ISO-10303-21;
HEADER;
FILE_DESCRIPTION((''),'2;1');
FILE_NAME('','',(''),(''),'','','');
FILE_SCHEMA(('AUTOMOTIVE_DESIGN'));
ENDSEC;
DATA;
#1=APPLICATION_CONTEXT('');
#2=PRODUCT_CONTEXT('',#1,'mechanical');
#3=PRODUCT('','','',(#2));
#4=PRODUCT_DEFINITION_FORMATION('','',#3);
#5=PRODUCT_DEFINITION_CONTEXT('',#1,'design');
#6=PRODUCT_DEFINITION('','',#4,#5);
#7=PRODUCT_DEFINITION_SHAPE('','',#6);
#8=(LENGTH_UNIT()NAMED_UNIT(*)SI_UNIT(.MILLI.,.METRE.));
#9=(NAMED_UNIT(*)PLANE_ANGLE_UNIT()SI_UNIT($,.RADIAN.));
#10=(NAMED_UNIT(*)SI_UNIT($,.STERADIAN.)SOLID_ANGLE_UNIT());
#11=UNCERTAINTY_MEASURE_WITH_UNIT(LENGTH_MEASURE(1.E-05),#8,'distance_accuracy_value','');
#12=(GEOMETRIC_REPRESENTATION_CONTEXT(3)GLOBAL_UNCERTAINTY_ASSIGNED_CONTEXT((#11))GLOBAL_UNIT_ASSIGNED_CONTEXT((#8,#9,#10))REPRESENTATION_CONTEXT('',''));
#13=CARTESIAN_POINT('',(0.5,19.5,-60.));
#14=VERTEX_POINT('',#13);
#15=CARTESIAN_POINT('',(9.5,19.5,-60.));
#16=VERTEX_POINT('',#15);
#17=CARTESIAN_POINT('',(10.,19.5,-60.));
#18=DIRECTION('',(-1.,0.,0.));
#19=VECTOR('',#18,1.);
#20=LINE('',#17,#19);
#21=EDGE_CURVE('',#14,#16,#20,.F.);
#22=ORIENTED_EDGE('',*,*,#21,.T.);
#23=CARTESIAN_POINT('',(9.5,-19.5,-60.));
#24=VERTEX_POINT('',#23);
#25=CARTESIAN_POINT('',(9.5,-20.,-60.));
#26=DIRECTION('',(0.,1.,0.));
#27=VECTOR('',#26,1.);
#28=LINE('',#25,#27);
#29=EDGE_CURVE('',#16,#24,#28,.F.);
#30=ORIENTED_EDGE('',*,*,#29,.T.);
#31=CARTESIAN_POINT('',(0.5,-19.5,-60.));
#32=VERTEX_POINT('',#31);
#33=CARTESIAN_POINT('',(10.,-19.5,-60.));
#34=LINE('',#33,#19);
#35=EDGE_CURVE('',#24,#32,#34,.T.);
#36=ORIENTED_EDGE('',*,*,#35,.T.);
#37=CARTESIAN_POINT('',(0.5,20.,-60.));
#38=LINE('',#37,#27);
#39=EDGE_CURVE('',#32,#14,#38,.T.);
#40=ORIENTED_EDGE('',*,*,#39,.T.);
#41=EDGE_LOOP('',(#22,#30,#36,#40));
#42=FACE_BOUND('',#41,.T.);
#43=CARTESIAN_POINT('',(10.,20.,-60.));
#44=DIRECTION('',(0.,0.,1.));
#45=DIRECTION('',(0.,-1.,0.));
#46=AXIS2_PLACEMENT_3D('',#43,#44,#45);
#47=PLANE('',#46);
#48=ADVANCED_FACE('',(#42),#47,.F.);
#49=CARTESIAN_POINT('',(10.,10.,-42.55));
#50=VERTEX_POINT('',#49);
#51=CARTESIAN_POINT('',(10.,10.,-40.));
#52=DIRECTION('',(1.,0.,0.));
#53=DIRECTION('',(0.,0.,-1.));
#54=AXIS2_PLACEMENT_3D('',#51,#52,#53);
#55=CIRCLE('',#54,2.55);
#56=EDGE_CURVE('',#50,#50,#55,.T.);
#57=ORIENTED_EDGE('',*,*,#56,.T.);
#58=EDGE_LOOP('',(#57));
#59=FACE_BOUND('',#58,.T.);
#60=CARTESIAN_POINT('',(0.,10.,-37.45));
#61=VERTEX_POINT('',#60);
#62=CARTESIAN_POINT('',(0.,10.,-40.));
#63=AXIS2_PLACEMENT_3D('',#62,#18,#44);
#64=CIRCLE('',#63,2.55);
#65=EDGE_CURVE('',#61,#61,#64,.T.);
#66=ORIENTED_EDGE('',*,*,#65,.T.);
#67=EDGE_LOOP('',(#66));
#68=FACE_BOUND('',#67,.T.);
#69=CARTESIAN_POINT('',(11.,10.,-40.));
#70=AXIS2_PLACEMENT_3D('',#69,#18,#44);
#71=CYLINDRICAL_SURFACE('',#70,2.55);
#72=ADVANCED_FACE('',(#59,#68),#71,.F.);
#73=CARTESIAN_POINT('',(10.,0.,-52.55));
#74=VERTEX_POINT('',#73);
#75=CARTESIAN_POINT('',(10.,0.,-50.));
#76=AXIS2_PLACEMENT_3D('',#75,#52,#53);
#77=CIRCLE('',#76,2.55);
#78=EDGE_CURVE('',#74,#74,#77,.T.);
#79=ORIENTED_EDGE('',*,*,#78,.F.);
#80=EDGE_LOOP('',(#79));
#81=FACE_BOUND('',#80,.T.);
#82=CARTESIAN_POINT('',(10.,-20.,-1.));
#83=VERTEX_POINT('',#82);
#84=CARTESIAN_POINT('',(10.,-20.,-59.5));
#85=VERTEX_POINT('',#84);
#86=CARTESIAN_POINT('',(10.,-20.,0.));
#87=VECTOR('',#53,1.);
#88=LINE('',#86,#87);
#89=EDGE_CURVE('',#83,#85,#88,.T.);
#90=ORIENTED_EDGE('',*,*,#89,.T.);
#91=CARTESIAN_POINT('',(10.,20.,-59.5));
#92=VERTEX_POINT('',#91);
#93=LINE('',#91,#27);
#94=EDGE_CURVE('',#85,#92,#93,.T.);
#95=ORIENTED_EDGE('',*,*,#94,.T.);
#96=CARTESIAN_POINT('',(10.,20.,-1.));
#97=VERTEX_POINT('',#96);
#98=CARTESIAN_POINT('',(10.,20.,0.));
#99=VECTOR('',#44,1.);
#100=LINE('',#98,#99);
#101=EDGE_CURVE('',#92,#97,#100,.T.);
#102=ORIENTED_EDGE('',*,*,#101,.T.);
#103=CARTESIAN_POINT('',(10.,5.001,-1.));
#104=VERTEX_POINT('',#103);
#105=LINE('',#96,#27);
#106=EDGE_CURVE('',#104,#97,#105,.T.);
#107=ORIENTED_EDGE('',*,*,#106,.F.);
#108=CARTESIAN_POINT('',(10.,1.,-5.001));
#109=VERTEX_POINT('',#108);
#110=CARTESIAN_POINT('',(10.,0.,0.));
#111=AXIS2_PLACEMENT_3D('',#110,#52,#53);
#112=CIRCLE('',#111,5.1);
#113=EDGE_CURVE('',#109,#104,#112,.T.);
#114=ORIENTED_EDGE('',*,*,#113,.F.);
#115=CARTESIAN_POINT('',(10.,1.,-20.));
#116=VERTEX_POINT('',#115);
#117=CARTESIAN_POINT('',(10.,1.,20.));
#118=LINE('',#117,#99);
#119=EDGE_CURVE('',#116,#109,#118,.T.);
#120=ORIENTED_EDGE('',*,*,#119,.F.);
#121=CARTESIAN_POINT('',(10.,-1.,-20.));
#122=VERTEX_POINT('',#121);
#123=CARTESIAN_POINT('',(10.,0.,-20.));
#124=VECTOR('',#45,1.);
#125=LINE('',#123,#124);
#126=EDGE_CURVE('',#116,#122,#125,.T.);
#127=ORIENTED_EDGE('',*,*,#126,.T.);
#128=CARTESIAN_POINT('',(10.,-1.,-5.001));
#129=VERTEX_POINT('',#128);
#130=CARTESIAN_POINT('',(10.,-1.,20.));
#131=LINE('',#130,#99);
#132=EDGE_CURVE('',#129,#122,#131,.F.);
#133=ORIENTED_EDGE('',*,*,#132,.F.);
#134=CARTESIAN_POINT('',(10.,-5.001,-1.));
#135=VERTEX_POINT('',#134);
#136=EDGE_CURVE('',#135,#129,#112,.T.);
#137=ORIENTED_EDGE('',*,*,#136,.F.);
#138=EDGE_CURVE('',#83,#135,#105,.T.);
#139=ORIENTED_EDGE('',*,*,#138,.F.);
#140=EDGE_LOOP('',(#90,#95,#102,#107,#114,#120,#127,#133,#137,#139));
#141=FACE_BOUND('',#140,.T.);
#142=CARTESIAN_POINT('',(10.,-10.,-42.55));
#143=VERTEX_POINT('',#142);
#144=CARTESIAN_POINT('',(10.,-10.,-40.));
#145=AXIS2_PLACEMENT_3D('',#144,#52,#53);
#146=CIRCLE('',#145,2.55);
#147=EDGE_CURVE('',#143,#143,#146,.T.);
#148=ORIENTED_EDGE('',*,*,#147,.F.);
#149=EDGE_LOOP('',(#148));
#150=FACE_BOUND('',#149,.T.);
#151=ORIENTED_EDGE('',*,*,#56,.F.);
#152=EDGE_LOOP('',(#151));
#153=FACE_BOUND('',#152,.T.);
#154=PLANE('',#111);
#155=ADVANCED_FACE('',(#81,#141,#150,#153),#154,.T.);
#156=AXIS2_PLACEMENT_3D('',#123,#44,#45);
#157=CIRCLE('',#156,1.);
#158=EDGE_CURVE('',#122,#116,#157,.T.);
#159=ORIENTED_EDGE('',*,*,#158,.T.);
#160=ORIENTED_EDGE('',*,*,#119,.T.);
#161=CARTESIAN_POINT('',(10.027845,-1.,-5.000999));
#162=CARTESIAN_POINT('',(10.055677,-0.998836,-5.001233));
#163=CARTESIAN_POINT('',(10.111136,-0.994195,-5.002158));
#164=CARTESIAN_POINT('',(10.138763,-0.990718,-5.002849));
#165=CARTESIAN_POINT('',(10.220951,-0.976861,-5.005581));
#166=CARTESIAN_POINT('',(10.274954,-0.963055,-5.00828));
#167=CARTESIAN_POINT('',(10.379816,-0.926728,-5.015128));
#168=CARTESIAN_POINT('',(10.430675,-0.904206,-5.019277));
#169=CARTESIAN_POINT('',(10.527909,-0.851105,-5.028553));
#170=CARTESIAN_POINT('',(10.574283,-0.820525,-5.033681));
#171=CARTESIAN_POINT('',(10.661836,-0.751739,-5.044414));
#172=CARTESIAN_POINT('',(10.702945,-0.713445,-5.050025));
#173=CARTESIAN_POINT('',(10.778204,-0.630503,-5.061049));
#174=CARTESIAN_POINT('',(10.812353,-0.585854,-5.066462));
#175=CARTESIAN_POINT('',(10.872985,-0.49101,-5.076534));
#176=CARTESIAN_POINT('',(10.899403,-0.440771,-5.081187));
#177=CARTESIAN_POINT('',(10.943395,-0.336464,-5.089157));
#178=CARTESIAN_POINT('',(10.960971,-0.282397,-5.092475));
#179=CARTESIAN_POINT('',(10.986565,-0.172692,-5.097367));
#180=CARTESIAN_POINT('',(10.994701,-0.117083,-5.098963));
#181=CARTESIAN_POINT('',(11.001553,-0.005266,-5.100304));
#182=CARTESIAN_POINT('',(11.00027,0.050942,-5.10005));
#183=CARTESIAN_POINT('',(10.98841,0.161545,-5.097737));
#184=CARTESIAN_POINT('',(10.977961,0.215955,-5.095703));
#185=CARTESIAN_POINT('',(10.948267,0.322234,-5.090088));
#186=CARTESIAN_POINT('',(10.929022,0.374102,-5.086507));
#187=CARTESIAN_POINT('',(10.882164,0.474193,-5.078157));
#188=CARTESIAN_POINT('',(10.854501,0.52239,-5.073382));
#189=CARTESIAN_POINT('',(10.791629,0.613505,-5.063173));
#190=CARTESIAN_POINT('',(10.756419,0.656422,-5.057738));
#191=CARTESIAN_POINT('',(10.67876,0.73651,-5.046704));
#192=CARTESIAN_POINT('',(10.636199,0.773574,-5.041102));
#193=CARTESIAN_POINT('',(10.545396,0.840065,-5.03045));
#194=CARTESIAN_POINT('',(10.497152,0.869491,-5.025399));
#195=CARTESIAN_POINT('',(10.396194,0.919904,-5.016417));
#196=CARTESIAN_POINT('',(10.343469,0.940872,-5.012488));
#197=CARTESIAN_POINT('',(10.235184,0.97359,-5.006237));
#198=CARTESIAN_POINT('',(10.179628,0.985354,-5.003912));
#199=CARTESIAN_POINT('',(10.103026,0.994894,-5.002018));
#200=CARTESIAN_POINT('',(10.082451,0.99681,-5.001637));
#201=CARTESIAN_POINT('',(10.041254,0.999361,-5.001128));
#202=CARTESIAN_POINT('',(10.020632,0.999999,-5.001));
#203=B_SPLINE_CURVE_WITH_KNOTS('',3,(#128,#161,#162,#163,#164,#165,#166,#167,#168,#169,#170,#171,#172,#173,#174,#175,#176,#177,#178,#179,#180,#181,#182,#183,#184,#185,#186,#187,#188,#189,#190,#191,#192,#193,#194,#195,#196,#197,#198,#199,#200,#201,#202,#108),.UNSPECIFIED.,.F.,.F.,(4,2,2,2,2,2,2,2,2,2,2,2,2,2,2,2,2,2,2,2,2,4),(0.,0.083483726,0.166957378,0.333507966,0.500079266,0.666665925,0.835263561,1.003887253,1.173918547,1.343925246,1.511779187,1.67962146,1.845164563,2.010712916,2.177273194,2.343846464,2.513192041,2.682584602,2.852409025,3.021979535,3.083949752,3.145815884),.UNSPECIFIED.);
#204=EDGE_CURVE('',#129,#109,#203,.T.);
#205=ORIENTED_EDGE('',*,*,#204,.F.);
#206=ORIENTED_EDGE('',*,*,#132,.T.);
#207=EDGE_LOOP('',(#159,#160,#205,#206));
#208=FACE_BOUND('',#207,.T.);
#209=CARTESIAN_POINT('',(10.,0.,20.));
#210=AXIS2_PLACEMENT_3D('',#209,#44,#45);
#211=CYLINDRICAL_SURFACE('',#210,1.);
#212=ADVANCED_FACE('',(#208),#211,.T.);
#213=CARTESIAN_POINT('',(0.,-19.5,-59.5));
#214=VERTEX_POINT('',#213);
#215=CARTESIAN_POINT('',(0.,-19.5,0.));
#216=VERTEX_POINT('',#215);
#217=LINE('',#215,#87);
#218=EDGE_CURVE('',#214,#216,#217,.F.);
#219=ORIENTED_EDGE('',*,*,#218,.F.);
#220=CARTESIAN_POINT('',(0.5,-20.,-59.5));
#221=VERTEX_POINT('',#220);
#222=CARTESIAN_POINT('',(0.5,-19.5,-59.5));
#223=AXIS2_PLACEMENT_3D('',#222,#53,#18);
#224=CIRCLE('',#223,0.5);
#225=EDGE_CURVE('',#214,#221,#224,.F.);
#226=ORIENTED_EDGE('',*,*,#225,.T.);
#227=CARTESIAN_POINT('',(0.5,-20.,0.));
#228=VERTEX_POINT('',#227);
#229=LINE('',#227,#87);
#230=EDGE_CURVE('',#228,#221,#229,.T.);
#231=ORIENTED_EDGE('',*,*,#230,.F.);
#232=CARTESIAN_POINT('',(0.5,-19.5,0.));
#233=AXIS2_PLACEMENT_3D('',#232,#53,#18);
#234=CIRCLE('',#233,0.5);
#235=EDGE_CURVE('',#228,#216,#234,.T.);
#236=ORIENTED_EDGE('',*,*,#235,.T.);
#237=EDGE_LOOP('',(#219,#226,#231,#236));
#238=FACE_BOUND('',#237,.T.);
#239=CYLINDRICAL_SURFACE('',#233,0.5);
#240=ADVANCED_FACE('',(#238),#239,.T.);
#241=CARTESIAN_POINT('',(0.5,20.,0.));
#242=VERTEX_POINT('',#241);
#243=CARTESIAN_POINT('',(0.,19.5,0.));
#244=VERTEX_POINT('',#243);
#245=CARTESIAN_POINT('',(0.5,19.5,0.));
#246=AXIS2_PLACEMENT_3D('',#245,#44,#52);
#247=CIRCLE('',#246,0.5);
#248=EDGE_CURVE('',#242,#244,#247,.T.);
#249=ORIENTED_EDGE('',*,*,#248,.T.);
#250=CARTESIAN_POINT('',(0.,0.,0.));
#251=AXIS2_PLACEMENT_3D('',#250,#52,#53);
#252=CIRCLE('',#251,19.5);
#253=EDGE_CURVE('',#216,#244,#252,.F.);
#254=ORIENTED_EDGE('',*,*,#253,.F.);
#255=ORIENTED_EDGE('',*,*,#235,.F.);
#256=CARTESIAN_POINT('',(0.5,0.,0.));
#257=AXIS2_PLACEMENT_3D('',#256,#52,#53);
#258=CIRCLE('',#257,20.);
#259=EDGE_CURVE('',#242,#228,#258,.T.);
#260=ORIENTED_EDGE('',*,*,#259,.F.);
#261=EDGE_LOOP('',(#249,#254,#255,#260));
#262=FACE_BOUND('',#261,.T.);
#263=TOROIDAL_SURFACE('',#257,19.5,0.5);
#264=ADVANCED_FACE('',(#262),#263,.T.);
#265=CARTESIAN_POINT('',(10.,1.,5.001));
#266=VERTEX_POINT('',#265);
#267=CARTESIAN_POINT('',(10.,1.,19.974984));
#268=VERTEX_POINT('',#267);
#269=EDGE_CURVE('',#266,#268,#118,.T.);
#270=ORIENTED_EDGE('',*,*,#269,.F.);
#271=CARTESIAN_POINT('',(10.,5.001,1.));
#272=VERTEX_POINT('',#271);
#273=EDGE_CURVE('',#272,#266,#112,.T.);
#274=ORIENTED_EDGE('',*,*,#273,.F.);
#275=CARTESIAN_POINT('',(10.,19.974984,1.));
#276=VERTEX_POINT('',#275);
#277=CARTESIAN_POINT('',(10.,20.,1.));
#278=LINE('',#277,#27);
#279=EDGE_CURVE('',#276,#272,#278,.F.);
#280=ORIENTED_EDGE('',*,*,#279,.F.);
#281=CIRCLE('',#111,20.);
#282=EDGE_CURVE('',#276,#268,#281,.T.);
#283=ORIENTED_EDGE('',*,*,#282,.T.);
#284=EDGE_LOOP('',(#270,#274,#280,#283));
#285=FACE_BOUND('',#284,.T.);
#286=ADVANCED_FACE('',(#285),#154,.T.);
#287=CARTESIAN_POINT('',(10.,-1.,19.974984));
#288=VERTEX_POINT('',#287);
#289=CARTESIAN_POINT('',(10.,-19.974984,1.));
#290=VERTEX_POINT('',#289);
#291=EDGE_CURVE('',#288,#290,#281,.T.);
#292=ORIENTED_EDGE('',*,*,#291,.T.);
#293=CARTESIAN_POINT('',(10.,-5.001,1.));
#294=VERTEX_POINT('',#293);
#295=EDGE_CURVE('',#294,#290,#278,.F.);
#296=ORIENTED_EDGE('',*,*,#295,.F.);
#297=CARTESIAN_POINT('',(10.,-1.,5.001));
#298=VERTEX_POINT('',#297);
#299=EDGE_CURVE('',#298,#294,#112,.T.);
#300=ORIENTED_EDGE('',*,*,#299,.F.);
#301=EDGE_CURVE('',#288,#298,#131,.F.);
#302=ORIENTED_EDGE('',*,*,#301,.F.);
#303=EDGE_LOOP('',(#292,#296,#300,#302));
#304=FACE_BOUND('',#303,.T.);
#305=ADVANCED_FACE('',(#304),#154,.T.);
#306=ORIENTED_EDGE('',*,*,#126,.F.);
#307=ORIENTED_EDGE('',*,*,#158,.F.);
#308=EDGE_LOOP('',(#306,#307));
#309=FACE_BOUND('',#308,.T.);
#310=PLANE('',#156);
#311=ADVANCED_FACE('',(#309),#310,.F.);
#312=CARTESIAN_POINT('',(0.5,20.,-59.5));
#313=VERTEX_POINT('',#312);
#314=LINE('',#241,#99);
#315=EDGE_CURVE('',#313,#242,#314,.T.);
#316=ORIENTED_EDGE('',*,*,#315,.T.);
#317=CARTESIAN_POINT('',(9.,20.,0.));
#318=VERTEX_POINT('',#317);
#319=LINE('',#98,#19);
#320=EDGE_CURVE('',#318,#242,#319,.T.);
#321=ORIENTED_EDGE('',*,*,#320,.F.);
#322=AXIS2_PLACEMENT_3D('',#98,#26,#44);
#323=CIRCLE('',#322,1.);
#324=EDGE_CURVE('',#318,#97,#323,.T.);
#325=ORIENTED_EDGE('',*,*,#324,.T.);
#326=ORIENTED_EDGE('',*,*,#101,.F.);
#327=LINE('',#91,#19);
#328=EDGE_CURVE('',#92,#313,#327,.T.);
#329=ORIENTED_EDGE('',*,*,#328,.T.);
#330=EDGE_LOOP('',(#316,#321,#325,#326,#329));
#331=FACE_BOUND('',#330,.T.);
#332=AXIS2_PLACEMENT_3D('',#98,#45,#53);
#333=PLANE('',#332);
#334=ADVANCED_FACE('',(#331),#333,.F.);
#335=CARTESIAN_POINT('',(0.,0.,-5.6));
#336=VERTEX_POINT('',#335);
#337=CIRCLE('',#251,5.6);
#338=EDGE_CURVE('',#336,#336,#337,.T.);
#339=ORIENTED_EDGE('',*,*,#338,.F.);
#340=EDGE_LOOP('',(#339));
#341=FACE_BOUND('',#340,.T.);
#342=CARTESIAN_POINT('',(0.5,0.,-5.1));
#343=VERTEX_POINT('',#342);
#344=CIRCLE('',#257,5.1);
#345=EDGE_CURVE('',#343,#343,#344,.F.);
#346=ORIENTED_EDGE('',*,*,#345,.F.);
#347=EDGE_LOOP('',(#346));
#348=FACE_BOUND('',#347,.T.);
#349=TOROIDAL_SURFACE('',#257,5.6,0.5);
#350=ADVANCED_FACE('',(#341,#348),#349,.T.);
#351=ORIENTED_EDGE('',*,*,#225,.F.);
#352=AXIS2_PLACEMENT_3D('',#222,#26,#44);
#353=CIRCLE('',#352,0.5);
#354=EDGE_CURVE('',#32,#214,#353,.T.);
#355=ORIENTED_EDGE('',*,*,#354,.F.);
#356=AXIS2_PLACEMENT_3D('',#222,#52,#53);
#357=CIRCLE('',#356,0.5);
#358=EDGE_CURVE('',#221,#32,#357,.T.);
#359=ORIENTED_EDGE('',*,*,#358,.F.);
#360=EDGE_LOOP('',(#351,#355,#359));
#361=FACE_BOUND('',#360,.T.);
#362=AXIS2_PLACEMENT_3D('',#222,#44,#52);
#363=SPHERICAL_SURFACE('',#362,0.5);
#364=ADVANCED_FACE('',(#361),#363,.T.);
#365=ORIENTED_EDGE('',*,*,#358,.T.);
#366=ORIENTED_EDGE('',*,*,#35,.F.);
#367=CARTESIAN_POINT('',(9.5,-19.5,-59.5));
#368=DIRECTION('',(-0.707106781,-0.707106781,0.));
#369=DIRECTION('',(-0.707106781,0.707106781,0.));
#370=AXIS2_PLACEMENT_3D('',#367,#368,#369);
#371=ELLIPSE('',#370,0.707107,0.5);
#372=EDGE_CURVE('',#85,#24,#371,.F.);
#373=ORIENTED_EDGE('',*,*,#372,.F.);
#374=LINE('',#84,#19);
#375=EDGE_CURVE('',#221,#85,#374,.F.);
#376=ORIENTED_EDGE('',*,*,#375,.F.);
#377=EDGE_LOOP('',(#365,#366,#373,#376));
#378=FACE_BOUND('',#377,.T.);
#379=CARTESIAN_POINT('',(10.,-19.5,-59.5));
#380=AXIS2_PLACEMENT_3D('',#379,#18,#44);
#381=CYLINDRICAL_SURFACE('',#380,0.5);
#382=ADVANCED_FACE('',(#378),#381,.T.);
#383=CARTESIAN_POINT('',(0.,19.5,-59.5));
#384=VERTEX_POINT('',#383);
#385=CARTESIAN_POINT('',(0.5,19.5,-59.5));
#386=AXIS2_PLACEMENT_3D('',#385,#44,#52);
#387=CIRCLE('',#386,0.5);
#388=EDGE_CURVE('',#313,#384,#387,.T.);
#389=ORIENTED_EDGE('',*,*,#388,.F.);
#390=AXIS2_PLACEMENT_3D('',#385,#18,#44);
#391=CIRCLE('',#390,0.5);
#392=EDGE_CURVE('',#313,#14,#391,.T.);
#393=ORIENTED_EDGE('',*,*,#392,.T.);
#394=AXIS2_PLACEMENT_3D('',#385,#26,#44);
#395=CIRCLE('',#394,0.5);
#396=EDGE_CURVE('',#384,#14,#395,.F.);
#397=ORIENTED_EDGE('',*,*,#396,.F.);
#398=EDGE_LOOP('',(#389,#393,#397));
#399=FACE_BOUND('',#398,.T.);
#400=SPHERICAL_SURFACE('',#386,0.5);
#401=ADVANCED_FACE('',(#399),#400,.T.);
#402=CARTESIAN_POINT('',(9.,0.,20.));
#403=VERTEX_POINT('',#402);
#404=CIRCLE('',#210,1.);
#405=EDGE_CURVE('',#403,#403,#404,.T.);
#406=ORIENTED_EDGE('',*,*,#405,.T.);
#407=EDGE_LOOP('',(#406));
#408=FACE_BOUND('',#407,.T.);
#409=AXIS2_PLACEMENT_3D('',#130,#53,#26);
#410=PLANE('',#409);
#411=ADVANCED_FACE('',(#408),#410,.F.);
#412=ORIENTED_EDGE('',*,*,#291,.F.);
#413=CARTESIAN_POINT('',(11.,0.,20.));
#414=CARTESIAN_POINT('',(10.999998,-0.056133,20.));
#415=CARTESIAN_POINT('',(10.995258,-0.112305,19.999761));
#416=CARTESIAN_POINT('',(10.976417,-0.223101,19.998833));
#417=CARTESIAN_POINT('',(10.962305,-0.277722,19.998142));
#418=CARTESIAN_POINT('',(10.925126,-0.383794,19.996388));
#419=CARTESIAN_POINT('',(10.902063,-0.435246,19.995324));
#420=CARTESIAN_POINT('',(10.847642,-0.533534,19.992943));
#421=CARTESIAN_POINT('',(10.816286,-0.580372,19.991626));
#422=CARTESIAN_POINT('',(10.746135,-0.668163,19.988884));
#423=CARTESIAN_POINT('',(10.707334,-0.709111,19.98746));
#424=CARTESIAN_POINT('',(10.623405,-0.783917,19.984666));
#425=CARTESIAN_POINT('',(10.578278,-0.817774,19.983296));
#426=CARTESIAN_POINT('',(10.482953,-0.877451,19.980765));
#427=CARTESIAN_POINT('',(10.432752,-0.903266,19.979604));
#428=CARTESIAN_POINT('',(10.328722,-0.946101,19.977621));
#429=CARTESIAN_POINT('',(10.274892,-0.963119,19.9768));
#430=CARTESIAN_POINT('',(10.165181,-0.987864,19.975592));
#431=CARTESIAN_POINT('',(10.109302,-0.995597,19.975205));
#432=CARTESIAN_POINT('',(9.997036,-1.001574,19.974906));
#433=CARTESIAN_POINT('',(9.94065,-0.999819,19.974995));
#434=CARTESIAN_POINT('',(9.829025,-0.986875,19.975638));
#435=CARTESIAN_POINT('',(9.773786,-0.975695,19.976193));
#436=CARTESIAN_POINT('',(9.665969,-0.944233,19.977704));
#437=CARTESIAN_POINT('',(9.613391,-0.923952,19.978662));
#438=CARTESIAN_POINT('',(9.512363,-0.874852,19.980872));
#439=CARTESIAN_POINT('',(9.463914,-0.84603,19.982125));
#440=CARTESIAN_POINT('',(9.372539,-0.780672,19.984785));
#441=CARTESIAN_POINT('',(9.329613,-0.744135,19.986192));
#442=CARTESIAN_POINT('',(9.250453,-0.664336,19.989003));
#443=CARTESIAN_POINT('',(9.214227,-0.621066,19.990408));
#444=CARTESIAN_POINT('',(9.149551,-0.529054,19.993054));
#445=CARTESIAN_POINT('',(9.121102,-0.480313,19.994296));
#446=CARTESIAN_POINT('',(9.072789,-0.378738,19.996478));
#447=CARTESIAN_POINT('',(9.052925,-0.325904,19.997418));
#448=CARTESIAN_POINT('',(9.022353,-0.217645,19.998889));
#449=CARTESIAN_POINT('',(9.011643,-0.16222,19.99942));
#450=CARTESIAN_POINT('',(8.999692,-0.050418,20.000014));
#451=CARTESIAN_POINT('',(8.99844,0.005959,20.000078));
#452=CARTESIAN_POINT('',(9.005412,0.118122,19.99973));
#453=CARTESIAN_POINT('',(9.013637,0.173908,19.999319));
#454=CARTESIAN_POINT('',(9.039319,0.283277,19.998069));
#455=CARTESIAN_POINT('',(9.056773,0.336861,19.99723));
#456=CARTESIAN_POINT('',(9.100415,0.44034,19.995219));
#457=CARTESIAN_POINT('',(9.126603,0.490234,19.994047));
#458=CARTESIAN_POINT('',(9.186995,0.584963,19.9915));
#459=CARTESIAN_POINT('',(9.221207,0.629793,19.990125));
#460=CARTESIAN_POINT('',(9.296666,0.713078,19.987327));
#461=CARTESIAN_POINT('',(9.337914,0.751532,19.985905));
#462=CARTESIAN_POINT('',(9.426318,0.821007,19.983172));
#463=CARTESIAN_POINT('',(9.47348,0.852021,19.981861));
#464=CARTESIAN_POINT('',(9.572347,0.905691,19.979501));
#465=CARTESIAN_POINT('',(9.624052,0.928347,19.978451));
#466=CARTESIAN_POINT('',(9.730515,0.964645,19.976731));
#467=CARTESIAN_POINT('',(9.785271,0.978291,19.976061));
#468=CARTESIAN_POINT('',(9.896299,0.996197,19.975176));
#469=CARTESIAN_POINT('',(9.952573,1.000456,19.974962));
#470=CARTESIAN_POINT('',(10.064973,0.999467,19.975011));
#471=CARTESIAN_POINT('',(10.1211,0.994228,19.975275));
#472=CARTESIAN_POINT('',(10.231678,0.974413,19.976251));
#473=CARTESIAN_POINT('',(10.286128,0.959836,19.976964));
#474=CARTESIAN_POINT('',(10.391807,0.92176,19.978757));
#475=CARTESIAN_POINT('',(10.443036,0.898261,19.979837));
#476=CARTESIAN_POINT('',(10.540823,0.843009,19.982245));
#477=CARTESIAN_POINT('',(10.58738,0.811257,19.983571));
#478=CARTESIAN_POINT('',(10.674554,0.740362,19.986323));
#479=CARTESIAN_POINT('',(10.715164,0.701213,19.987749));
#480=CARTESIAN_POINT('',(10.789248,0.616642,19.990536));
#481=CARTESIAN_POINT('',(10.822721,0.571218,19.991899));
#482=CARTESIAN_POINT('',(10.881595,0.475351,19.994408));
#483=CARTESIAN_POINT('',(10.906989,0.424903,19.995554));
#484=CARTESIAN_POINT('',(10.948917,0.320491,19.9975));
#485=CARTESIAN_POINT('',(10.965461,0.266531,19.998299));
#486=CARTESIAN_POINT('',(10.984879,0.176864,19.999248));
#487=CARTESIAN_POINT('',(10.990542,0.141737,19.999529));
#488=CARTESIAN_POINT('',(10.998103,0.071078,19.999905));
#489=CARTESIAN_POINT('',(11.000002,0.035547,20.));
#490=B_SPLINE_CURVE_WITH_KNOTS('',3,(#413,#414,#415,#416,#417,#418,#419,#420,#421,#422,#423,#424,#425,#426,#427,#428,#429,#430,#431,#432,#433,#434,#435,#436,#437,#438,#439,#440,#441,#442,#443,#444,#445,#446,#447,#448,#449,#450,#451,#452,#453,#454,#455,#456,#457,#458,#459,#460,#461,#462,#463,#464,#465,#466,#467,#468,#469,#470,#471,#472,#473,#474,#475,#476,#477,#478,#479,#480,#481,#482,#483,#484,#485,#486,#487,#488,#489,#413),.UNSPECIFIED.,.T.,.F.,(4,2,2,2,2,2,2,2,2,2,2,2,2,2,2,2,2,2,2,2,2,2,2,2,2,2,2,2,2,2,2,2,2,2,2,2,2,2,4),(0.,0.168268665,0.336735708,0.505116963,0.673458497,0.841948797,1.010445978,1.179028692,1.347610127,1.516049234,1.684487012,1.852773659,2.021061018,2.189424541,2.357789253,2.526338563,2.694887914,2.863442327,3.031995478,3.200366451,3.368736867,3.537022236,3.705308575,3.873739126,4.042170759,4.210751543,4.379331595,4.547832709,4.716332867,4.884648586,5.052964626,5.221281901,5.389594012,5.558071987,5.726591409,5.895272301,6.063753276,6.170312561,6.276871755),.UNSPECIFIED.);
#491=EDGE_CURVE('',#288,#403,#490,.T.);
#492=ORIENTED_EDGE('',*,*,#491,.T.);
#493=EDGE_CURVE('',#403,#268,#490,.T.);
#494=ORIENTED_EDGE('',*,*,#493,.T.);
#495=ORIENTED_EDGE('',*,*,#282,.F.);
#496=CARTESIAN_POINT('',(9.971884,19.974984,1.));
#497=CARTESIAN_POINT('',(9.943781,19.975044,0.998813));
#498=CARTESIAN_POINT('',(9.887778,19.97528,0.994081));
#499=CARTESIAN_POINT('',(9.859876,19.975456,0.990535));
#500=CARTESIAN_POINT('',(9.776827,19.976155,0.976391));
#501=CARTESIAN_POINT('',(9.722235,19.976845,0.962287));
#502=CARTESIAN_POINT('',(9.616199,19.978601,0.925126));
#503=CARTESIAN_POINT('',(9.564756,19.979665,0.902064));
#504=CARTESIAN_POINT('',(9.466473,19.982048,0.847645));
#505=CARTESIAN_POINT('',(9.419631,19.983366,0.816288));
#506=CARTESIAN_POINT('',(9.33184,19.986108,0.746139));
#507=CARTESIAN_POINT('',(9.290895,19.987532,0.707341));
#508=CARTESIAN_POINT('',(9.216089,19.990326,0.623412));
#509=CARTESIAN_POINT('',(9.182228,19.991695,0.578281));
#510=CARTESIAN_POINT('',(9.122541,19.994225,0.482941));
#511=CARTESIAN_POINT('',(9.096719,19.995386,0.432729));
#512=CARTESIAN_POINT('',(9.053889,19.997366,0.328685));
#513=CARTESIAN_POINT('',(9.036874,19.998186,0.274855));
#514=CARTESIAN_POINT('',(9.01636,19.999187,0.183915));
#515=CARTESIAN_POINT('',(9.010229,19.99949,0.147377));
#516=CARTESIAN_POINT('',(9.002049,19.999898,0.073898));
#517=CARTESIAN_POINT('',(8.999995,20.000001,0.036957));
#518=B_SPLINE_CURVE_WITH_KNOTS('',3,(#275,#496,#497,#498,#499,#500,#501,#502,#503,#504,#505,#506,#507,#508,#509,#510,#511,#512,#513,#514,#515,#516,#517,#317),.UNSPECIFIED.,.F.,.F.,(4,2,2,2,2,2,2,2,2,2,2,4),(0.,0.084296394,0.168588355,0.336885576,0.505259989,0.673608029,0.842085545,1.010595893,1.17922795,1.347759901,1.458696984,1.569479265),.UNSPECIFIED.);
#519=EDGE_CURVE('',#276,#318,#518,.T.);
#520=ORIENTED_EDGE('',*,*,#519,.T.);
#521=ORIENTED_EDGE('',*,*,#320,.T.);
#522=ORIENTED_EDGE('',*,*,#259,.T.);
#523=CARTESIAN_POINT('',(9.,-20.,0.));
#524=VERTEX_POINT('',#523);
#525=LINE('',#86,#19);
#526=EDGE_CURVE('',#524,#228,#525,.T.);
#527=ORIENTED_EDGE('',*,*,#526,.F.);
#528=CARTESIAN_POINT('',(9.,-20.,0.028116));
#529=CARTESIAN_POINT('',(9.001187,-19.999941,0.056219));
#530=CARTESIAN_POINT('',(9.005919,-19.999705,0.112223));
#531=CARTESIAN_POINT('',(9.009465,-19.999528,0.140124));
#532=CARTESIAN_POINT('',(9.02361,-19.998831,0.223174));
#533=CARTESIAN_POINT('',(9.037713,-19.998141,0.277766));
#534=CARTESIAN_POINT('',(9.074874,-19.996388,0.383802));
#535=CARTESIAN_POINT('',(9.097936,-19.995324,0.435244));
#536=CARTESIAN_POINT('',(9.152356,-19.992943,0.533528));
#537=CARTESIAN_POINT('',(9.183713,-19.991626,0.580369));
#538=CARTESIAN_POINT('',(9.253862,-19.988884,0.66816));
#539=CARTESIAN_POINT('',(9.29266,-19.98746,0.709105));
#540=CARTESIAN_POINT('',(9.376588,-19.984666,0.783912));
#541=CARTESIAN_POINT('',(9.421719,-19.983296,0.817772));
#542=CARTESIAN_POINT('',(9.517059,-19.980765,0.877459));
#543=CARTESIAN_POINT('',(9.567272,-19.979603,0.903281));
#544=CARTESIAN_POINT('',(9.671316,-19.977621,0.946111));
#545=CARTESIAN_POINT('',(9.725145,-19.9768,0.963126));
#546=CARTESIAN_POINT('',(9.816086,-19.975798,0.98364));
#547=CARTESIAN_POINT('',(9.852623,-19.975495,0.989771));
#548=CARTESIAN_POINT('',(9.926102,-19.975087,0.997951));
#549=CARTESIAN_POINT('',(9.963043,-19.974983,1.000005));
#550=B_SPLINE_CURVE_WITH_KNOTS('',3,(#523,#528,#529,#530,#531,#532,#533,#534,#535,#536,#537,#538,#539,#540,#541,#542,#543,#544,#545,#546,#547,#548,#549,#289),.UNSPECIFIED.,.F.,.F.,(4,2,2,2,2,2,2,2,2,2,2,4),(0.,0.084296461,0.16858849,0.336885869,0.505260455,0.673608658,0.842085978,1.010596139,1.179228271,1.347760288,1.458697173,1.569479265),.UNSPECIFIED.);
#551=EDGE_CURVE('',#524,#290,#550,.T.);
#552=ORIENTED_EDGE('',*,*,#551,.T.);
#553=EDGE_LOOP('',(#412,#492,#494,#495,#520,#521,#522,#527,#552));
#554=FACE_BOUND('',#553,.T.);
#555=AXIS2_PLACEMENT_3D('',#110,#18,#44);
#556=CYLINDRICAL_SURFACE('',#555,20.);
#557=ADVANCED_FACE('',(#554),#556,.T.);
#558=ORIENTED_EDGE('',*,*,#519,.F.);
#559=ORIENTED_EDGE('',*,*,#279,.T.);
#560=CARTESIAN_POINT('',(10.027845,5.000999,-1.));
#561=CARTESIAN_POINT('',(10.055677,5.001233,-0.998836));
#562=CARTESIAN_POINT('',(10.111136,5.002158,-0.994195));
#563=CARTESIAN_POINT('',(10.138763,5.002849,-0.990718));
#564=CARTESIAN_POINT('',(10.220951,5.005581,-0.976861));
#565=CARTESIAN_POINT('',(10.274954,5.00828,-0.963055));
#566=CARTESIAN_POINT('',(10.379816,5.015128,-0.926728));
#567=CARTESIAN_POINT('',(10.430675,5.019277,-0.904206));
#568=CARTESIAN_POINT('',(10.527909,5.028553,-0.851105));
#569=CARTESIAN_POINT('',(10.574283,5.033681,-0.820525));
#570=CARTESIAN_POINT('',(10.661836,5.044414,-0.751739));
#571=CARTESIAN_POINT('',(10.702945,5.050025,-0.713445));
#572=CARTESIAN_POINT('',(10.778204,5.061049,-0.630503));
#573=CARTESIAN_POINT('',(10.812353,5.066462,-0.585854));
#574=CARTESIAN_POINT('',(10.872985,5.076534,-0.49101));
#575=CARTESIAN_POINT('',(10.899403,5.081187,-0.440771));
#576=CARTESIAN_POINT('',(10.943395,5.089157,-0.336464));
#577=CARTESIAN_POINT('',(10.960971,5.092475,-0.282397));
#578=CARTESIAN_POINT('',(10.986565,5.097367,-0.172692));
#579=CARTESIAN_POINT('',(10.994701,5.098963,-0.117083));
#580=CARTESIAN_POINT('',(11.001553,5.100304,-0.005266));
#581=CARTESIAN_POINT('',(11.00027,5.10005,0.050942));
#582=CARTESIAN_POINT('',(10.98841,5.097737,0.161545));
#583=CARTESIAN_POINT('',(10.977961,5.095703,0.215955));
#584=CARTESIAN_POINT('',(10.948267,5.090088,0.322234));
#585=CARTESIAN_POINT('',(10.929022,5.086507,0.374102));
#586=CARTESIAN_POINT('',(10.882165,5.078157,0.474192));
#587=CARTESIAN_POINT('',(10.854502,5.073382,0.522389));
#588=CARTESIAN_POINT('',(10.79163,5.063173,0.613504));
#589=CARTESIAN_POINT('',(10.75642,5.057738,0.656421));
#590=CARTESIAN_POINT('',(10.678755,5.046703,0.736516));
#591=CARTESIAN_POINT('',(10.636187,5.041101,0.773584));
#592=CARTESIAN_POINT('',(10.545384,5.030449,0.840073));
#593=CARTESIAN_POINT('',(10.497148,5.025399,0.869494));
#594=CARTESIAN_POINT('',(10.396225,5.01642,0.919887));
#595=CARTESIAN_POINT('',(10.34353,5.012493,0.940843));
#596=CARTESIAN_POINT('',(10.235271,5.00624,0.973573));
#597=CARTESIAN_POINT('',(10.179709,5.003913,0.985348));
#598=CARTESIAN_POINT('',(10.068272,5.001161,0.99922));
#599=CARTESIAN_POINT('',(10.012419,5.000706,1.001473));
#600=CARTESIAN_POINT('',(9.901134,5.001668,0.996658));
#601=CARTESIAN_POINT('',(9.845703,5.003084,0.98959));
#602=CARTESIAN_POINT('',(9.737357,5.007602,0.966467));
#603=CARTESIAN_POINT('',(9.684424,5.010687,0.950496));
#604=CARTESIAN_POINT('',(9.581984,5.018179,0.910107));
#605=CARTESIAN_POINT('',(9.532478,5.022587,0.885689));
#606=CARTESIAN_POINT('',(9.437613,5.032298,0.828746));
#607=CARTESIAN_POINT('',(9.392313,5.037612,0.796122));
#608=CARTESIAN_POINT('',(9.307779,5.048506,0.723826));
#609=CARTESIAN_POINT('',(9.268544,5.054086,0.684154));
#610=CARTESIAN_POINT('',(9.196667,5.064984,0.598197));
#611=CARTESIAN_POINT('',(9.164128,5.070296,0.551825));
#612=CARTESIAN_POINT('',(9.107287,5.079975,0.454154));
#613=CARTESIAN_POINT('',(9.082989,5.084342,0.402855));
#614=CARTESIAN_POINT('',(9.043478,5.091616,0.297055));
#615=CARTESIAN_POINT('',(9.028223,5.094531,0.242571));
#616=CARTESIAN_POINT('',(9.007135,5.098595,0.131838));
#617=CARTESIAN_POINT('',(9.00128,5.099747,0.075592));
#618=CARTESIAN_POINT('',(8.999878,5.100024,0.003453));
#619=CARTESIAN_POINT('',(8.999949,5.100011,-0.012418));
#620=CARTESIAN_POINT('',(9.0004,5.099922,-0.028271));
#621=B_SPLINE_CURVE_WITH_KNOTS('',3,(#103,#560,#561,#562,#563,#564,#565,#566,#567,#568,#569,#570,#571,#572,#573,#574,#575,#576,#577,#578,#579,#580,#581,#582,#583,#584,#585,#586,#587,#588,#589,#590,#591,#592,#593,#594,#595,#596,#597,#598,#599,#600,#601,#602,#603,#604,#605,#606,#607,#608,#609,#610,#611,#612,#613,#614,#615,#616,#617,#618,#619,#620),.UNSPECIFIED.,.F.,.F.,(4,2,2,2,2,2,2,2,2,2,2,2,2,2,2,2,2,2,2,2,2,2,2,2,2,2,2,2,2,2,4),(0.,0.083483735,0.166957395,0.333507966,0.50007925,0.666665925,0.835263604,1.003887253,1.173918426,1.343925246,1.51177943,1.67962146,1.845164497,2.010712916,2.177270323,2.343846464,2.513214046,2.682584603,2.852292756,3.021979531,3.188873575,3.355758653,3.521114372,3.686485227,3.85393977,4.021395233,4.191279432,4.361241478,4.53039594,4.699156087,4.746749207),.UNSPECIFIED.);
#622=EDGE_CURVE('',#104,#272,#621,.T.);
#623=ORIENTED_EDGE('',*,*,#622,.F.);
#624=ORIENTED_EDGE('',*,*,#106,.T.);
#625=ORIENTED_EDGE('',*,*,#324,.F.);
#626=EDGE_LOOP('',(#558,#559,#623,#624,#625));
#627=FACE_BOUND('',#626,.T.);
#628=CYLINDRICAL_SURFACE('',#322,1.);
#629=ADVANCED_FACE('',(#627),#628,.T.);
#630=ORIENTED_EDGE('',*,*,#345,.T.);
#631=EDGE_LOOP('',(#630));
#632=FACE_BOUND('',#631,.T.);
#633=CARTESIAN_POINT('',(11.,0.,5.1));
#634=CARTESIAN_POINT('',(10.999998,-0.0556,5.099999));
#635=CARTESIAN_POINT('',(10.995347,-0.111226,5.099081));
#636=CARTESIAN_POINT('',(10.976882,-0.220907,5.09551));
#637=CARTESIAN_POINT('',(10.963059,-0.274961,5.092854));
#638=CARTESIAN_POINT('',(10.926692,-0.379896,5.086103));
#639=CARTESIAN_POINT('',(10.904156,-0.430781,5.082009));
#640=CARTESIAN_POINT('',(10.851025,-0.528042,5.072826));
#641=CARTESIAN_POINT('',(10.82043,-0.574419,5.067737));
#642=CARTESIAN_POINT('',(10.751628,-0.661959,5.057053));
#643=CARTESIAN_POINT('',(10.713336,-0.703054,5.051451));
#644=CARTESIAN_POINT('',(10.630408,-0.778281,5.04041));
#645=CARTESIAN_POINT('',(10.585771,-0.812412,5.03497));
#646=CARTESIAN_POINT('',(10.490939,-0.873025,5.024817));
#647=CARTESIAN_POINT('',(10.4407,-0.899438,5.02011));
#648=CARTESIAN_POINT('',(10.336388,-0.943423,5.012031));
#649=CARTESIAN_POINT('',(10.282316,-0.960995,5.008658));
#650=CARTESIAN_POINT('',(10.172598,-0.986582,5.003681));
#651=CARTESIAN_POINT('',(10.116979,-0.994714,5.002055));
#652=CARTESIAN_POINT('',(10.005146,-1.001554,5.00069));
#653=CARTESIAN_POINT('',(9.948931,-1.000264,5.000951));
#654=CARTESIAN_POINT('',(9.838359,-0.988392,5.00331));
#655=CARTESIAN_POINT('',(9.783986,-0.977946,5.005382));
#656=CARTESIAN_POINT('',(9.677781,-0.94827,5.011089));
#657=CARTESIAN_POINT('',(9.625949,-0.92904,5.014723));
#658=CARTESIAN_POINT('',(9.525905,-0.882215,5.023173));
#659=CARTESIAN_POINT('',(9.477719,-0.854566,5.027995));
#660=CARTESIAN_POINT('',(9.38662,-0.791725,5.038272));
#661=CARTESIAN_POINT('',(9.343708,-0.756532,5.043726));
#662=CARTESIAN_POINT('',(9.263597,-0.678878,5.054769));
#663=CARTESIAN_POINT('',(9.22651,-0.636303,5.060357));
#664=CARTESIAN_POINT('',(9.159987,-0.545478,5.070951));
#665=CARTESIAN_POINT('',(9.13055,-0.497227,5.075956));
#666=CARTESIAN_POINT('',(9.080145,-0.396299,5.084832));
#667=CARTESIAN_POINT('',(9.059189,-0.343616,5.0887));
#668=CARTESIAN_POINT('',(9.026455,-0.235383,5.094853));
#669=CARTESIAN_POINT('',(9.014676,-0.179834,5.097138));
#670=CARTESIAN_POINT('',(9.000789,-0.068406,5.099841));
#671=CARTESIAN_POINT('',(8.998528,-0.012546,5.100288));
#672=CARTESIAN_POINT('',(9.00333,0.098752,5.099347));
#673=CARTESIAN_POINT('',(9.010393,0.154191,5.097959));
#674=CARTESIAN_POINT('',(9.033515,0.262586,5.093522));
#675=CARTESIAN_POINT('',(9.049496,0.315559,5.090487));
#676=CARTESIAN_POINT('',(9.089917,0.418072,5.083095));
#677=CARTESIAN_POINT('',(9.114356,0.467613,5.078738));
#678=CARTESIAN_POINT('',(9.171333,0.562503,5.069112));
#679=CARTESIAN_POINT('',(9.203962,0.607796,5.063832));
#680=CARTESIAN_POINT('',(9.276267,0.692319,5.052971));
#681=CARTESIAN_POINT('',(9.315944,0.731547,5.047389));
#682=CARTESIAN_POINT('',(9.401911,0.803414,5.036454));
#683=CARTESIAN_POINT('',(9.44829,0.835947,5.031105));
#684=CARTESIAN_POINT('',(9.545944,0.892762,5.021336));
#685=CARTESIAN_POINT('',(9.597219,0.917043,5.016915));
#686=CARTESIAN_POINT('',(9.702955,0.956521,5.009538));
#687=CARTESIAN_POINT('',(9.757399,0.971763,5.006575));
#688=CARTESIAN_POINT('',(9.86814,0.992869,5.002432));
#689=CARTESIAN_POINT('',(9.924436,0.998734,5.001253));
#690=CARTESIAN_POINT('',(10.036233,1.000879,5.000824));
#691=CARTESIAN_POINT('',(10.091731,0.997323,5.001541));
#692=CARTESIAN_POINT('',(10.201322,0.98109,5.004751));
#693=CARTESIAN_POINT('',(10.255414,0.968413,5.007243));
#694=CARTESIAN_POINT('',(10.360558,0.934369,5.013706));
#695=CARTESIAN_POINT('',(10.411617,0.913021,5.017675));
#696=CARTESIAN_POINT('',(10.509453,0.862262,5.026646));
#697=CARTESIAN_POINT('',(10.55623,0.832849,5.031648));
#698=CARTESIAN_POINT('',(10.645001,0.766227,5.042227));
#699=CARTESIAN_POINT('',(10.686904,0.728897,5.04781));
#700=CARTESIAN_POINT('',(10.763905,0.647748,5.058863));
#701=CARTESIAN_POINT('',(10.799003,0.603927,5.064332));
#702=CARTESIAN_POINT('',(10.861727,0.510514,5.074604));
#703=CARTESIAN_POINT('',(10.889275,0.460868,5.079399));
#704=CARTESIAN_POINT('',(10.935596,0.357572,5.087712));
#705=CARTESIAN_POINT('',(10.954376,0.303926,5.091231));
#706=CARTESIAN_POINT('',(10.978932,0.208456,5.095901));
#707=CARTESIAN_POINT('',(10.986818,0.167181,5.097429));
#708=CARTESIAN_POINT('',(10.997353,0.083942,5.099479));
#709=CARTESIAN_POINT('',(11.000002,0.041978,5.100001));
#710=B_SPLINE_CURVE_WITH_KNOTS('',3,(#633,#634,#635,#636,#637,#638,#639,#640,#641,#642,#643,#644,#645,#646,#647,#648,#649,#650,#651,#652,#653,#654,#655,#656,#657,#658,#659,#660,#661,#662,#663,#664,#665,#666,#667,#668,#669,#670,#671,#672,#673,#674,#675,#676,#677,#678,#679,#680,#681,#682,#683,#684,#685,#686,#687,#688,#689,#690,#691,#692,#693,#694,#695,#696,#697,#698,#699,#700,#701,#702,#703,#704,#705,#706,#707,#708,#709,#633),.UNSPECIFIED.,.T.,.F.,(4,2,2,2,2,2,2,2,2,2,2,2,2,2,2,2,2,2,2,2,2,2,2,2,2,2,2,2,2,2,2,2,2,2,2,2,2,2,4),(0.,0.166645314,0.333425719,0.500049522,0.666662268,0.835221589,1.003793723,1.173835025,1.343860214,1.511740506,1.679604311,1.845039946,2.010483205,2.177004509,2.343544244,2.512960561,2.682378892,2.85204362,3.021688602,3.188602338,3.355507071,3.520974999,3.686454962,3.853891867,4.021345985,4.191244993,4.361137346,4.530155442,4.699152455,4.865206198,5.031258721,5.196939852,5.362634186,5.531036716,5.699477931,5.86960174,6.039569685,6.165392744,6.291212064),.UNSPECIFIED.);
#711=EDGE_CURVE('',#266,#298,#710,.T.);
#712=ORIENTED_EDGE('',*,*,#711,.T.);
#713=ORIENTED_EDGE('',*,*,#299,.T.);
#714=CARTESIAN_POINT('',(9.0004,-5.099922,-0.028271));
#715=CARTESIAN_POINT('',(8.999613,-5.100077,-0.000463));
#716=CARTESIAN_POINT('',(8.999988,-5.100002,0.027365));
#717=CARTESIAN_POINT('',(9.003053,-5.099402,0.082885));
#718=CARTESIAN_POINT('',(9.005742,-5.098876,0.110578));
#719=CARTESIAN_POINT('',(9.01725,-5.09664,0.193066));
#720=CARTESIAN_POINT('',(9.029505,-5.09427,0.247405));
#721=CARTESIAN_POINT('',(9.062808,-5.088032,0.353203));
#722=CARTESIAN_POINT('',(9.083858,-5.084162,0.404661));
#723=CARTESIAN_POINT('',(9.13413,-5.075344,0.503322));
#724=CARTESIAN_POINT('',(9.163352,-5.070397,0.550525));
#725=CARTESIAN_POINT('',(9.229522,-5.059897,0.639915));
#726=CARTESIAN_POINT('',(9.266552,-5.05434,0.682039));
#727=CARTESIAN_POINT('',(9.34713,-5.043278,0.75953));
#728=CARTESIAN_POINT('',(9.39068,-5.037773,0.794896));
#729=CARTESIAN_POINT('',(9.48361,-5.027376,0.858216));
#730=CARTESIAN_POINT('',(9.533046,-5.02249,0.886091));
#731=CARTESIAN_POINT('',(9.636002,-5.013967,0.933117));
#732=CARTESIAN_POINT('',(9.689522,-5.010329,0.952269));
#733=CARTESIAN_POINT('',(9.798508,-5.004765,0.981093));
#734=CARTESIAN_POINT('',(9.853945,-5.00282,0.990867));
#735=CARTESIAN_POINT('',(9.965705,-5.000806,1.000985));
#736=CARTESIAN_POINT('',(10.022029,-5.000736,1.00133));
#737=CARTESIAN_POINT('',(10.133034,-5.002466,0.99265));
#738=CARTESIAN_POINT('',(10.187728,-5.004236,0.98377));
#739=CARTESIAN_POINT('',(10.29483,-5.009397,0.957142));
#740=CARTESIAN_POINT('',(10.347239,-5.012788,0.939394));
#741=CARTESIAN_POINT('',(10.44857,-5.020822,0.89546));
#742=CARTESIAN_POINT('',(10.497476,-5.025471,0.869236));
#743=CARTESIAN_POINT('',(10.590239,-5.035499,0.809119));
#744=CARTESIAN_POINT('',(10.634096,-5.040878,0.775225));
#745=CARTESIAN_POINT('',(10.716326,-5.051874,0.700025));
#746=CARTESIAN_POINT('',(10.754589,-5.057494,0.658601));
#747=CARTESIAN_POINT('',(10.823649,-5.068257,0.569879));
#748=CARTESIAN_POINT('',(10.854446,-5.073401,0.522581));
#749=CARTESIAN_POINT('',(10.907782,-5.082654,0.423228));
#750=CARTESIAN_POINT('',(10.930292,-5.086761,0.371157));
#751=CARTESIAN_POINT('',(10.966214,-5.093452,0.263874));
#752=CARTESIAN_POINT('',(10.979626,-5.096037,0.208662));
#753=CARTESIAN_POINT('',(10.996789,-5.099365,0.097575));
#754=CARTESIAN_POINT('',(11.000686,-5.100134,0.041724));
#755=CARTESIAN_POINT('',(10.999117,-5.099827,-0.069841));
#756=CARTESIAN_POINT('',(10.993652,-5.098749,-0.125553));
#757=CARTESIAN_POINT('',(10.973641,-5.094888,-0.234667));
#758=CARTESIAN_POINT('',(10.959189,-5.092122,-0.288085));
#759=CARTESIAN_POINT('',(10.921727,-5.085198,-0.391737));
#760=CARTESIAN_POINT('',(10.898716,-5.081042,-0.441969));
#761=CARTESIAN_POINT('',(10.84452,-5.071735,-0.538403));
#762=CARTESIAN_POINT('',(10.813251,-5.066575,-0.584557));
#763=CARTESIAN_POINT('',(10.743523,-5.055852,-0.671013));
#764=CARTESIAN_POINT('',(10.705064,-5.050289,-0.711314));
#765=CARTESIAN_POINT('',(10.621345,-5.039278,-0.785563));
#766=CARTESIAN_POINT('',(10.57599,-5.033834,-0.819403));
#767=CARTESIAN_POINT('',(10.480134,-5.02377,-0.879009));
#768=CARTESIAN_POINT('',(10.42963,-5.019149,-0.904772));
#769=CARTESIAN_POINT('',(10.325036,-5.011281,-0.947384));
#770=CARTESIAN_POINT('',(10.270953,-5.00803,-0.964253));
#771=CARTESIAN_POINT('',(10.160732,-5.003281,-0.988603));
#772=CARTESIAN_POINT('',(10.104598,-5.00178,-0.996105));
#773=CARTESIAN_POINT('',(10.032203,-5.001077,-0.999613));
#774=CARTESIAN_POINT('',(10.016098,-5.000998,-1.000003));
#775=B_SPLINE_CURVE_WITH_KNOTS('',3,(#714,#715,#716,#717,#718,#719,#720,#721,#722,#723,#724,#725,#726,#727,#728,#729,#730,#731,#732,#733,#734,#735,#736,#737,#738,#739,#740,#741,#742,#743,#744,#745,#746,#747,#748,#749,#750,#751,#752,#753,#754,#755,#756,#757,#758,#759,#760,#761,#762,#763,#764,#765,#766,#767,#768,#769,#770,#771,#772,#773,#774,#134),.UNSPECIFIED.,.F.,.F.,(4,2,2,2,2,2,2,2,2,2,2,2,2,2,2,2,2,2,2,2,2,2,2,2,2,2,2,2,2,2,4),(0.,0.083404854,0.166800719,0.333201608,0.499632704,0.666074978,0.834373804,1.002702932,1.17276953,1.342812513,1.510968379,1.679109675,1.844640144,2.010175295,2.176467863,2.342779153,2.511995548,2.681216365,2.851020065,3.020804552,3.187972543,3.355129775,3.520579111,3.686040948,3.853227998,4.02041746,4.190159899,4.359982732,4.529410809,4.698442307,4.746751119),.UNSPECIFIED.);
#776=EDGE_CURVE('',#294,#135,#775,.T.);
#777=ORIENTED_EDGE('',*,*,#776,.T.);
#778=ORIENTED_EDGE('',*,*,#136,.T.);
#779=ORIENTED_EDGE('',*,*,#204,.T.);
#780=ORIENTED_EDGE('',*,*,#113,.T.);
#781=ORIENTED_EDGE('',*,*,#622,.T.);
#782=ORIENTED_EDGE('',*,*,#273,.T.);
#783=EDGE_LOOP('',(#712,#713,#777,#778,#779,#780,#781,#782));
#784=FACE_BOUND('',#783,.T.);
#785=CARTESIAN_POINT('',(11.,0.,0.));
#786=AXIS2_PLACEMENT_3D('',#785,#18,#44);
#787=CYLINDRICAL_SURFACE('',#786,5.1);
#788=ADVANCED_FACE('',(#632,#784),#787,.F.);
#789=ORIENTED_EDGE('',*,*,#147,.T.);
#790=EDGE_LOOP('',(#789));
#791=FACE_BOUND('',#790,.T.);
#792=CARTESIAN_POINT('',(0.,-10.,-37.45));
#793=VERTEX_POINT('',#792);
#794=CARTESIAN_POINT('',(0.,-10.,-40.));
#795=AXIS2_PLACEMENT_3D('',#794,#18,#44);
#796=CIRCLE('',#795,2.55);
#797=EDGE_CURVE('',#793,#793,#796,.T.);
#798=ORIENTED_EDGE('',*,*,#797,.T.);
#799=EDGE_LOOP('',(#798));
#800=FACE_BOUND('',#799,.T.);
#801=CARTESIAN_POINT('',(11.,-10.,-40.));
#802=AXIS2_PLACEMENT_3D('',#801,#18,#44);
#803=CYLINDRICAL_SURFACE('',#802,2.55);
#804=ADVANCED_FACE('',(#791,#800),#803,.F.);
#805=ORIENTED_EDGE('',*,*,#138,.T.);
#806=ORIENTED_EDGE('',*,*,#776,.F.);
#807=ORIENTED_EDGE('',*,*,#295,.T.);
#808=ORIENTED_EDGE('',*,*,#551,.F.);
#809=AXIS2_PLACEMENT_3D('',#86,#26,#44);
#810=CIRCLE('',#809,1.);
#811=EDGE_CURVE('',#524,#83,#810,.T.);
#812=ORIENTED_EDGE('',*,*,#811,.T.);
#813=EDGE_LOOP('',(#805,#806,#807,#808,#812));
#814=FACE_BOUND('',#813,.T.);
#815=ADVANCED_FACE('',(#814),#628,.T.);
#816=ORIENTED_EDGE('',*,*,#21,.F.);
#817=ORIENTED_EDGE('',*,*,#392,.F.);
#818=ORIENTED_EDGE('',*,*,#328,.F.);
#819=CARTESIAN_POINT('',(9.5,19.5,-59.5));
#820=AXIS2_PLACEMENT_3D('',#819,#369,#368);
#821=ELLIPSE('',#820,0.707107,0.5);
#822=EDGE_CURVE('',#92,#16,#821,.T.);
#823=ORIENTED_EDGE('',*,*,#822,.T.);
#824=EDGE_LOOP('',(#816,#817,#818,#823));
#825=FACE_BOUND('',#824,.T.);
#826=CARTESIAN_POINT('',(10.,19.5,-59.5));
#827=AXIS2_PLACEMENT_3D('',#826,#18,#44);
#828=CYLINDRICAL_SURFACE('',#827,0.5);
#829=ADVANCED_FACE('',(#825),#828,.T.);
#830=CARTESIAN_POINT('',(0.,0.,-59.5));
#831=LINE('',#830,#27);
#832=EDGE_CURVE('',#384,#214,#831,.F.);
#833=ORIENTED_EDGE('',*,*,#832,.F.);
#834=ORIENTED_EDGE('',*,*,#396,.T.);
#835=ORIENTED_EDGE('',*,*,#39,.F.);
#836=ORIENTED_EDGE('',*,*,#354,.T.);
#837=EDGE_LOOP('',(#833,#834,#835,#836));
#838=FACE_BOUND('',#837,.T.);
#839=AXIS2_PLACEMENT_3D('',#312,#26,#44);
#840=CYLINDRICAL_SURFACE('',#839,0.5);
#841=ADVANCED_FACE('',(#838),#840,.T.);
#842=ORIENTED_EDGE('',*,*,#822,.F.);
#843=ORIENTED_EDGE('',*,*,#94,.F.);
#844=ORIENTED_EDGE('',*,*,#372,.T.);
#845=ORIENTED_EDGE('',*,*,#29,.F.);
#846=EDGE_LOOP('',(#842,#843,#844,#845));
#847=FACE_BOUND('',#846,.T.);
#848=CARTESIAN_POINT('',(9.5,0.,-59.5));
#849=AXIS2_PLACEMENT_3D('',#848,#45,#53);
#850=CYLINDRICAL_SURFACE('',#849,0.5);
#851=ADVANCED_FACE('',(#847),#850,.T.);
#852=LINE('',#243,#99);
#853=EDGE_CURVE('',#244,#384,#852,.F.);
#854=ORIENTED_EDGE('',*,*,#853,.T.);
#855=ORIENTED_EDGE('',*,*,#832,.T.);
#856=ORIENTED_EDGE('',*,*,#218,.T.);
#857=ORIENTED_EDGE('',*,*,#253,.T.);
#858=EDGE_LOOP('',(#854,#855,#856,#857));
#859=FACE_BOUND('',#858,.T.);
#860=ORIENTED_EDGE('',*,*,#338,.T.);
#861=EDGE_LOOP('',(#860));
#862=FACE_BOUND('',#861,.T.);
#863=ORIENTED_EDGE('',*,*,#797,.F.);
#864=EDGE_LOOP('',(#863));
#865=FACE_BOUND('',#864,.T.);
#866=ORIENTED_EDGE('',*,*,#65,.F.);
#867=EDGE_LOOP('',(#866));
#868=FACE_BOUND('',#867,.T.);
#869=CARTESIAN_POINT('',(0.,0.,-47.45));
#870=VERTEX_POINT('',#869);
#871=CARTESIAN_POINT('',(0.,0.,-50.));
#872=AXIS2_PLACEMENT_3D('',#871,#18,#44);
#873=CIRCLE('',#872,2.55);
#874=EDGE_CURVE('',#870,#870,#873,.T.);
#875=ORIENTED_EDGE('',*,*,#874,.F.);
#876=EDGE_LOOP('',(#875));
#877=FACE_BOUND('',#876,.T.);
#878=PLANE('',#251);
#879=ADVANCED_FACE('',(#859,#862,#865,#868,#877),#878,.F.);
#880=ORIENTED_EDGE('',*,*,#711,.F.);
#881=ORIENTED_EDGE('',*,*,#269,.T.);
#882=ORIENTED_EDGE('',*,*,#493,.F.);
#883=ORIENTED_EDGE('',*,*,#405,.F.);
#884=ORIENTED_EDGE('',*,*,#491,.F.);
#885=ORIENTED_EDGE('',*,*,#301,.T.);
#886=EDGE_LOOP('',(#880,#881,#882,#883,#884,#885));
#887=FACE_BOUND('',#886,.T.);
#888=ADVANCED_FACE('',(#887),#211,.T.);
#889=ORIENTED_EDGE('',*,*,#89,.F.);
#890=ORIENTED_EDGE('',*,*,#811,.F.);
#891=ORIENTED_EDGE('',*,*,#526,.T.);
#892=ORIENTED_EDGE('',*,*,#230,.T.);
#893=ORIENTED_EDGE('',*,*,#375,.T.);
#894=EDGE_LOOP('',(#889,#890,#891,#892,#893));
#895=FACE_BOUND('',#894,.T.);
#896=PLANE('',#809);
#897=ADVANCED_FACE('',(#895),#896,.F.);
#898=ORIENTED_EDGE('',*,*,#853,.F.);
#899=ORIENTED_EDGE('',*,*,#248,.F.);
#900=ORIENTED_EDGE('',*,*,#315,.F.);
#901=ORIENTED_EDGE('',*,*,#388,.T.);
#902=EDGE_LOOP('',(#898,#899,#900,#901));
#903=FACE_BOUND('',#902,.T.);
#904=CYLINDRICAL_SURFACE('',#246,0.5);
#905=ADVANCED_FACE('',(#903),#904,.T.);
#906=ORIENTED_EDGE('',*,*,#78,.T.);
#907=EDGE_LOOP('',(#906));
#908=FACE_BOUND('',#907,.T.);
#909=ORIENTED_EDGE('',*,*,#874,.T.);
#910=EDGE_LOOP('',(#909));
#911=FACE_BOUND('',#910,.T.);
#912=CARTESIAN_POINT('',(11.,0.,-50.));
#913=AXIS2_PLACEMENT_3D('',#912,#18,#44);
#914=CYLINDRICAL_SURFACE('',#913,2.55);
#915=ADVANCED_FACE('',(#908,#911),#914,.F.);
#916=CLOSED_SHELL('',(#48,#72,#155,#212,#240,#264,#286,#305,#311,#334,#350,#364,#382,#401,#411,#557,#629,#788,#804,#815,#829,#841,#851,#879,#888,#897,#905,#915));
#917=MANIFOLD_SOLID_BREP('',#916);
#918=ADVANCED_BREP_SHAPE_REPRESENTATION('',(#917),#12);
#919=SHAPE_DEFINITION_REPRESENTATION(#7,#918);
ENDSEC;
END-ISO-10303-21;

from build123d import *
from build123d.topology import SkipClean

# Parameters (mm, degrees)
BOSS_EXTRUDE1_DEPTH = 10
SKETCH3_W           = 1
SKETCH3_H           = 40
SKETCH4_W           = 40
SKETCH4_H           = 1
SKETCH7_R           = 5.1
CUT_EXTRUDE3_DEPTH  = 65.195015431
FILLET3_R           = 0.5
FILLET4_R           = 0.5
SKETCH6_R           = 2.55
CUT_EXTRUDE4_DEPTH  = 65.195015432


with BuildPart() as part:
    # Sketch1 → Boss-Extrude1 (new body)
    with BuildSketch(Plane(origin=(0, 0, 0), x_dir=(0, 0, -1), z_dir=(1, 0, 0))):
        with BuildLine():
            Line((0, 20), (60, 20))
            Line((60, 20), (60, -20))
            Line((60, -20), (0, -20))
            ThreePointArc((0, -20), (-20, 0), (0, 20))
        make_face()
    extrude(amount=BOSS_EXTRUDE1_DEPTH)

    # Sketch3 → Revolve-Thin1 (revolve)
    with BuildSketch(Plane(origin=(10, 0, 0), x_dir=(0, 0, -1), z_dir=(1, 0, 0))):
        with Locations((0.5, 0)):
            Rectangle(SKETCH3_W, SKETCH3_H)
    revolve(axis=Axis((10, 20, 0), (0, -1, 0)))

    # Sketch4 → Revolve-Thin2 (revolve)
    with SkipClean():  # the faces are left unmerged after this step: merging them gives an invalid solid
        with BuildSketch(Plane(origin=(10, 0, 0), x_dir=(0, 0, -1), z_dir=(1, 0, 0))):
            with Locations((0, 0.5)):
                Rectangle(SKETCH4_W, SKETCH4_H)
        revolve(axis=Axis((10, 0, 20), (0, 0, -1)))

    # Sketch7 → Cut-Extrude3 (cut, through all)
    with SkipClean():  # the faces are left unmerged after this step: merging them gives an invalid solid
        with BuildSketch(Plane.ZY):
            Circle(SKETCH7_R)
        extrude(amount=-CUT_EXTRUDE3_DEPTH, mode=Mode.SUBTRACT)

    # Fillet3
    fillet3_edges = [part.edges().sort_by_distance(p)[0] for p in [
        (0, 20, -30),
        (0, 0, -60),
        (0, -20, -30),
        (0, 0, -5.1),
        (0, 0, 20),
    ]]
    fillet(fillet3_edges, radius=FILLET3_R)

    # Fillet4
    # the kernel refuses this fillet: 0.5 mm, written as the material it takes off along each edge
    with BuildSketch(Plane(origin=(0.5, 19.5, -59.5), x_dir=(0, 0, -1), z_dir=(0, 1, 0))) as fillet4_piece_1_section:
        Polygon((0, 0), (FILLET4_R, 0), (FILLET4_R, FILLET4_R), (0, FILLET4_R), align=None)
    fillet4_piece_1 = extrude(amount=FILLET4_R, mode=Mode.PRIVATE)
    fillet4_piece_1 = fillet4_piece_1 - Plane(origin=(0.5, 19.5, -59.5), x_dir=(0.7071067811865475, 0, 0.7071067811865475), z_dir=(0, 1, 0)) * Sphere(FILLET4_R, mode=Mode.PRIVATE)
    add(fillet4_piece_1, mode=Mode.SUBTRACT)
    with BuildSketch(Plane(origin=(0.5, -19.5, -59.5), x_dir=(0, -1, 0), z_dir=(0, 0, -1))) as fillet4_piece_2_section:
        Polygon((0, 0), (FILLET4_R, 0), (FILLET4_R, FILLET4_R), (0, FILLET4_R), align=None)
    fillet4_piece_2 = extrude(amount=FILLET4_R, mode=Mode.PRIVATE)
    fillet4_piece_2 = fillet4_piece_2 - Plane(origin=(0.5, -19.5, -59.5), x_dir=(0.7071067811865475, 0.7071067811865475, 0), z_dir=(0, 0, -1)) * Sphere(FILLET4_R, mode=Mode.PRIVATE)
    add(fillet4_piece_2, mode=Mode.SUBTRACT)
    with BuildSketch(Plane(origin=(10, 21.25, -60), x_dir=(-1, 0, 0), z_dir=(0, -1, 0))) as fillet4_piece_3:
        with BuildLine():
            CenterArc((FILLET4_R, -FILLET4_R), FILLET4_R, 90, 90)
            Line((0, -FILLET4_R), (0, 0))
            Line((0, 0), (FILLET4_R, 0))
        make_face()
    extrude(amount=42.5, mode=Mode.SUBTRACT)
    with BuildSketch(Plane(origin=(0.5, 20, -60), x_dir=(0, 0, 1), z_dir=(1, 0, 0)), Plane(origin=(0.5, -20, -60), x_dir=(0, 1, 0), z_dir=(1, 0, 0))) as fillet4_piece_4:
        with BuildLine():
            CenterArc((FILLET4_R, FILLET4_R), FILLET4_R, 180, 90)
            Line((0, FILLET4_R), (0, 0))
            Line((0, 0), (FILLET4_R, 0))
        make_face()
    extrude(amount=10.75, mode=Mode.SUBTRACT)

    # Sketch6 → Cut-Extrude4 (cut, through all)
    with SkipClean():  # the faces are left unmerged after this step: merging them gives an invalid solid
        with BuildSketch(Plane.ZY):
            with Locations((-40, 10)):
                Circle(SKETCH6_R)
            with Locations((-50, 0)):
                Circle(SKETCH6_R)
            with Locations((-40, -10)):
                Circle(SKETCH6_R)
        extrude(amount=-CUT_EXTRUDE4_DEPTH, mode=Mode.SUBTRACT)


solid = part.part
